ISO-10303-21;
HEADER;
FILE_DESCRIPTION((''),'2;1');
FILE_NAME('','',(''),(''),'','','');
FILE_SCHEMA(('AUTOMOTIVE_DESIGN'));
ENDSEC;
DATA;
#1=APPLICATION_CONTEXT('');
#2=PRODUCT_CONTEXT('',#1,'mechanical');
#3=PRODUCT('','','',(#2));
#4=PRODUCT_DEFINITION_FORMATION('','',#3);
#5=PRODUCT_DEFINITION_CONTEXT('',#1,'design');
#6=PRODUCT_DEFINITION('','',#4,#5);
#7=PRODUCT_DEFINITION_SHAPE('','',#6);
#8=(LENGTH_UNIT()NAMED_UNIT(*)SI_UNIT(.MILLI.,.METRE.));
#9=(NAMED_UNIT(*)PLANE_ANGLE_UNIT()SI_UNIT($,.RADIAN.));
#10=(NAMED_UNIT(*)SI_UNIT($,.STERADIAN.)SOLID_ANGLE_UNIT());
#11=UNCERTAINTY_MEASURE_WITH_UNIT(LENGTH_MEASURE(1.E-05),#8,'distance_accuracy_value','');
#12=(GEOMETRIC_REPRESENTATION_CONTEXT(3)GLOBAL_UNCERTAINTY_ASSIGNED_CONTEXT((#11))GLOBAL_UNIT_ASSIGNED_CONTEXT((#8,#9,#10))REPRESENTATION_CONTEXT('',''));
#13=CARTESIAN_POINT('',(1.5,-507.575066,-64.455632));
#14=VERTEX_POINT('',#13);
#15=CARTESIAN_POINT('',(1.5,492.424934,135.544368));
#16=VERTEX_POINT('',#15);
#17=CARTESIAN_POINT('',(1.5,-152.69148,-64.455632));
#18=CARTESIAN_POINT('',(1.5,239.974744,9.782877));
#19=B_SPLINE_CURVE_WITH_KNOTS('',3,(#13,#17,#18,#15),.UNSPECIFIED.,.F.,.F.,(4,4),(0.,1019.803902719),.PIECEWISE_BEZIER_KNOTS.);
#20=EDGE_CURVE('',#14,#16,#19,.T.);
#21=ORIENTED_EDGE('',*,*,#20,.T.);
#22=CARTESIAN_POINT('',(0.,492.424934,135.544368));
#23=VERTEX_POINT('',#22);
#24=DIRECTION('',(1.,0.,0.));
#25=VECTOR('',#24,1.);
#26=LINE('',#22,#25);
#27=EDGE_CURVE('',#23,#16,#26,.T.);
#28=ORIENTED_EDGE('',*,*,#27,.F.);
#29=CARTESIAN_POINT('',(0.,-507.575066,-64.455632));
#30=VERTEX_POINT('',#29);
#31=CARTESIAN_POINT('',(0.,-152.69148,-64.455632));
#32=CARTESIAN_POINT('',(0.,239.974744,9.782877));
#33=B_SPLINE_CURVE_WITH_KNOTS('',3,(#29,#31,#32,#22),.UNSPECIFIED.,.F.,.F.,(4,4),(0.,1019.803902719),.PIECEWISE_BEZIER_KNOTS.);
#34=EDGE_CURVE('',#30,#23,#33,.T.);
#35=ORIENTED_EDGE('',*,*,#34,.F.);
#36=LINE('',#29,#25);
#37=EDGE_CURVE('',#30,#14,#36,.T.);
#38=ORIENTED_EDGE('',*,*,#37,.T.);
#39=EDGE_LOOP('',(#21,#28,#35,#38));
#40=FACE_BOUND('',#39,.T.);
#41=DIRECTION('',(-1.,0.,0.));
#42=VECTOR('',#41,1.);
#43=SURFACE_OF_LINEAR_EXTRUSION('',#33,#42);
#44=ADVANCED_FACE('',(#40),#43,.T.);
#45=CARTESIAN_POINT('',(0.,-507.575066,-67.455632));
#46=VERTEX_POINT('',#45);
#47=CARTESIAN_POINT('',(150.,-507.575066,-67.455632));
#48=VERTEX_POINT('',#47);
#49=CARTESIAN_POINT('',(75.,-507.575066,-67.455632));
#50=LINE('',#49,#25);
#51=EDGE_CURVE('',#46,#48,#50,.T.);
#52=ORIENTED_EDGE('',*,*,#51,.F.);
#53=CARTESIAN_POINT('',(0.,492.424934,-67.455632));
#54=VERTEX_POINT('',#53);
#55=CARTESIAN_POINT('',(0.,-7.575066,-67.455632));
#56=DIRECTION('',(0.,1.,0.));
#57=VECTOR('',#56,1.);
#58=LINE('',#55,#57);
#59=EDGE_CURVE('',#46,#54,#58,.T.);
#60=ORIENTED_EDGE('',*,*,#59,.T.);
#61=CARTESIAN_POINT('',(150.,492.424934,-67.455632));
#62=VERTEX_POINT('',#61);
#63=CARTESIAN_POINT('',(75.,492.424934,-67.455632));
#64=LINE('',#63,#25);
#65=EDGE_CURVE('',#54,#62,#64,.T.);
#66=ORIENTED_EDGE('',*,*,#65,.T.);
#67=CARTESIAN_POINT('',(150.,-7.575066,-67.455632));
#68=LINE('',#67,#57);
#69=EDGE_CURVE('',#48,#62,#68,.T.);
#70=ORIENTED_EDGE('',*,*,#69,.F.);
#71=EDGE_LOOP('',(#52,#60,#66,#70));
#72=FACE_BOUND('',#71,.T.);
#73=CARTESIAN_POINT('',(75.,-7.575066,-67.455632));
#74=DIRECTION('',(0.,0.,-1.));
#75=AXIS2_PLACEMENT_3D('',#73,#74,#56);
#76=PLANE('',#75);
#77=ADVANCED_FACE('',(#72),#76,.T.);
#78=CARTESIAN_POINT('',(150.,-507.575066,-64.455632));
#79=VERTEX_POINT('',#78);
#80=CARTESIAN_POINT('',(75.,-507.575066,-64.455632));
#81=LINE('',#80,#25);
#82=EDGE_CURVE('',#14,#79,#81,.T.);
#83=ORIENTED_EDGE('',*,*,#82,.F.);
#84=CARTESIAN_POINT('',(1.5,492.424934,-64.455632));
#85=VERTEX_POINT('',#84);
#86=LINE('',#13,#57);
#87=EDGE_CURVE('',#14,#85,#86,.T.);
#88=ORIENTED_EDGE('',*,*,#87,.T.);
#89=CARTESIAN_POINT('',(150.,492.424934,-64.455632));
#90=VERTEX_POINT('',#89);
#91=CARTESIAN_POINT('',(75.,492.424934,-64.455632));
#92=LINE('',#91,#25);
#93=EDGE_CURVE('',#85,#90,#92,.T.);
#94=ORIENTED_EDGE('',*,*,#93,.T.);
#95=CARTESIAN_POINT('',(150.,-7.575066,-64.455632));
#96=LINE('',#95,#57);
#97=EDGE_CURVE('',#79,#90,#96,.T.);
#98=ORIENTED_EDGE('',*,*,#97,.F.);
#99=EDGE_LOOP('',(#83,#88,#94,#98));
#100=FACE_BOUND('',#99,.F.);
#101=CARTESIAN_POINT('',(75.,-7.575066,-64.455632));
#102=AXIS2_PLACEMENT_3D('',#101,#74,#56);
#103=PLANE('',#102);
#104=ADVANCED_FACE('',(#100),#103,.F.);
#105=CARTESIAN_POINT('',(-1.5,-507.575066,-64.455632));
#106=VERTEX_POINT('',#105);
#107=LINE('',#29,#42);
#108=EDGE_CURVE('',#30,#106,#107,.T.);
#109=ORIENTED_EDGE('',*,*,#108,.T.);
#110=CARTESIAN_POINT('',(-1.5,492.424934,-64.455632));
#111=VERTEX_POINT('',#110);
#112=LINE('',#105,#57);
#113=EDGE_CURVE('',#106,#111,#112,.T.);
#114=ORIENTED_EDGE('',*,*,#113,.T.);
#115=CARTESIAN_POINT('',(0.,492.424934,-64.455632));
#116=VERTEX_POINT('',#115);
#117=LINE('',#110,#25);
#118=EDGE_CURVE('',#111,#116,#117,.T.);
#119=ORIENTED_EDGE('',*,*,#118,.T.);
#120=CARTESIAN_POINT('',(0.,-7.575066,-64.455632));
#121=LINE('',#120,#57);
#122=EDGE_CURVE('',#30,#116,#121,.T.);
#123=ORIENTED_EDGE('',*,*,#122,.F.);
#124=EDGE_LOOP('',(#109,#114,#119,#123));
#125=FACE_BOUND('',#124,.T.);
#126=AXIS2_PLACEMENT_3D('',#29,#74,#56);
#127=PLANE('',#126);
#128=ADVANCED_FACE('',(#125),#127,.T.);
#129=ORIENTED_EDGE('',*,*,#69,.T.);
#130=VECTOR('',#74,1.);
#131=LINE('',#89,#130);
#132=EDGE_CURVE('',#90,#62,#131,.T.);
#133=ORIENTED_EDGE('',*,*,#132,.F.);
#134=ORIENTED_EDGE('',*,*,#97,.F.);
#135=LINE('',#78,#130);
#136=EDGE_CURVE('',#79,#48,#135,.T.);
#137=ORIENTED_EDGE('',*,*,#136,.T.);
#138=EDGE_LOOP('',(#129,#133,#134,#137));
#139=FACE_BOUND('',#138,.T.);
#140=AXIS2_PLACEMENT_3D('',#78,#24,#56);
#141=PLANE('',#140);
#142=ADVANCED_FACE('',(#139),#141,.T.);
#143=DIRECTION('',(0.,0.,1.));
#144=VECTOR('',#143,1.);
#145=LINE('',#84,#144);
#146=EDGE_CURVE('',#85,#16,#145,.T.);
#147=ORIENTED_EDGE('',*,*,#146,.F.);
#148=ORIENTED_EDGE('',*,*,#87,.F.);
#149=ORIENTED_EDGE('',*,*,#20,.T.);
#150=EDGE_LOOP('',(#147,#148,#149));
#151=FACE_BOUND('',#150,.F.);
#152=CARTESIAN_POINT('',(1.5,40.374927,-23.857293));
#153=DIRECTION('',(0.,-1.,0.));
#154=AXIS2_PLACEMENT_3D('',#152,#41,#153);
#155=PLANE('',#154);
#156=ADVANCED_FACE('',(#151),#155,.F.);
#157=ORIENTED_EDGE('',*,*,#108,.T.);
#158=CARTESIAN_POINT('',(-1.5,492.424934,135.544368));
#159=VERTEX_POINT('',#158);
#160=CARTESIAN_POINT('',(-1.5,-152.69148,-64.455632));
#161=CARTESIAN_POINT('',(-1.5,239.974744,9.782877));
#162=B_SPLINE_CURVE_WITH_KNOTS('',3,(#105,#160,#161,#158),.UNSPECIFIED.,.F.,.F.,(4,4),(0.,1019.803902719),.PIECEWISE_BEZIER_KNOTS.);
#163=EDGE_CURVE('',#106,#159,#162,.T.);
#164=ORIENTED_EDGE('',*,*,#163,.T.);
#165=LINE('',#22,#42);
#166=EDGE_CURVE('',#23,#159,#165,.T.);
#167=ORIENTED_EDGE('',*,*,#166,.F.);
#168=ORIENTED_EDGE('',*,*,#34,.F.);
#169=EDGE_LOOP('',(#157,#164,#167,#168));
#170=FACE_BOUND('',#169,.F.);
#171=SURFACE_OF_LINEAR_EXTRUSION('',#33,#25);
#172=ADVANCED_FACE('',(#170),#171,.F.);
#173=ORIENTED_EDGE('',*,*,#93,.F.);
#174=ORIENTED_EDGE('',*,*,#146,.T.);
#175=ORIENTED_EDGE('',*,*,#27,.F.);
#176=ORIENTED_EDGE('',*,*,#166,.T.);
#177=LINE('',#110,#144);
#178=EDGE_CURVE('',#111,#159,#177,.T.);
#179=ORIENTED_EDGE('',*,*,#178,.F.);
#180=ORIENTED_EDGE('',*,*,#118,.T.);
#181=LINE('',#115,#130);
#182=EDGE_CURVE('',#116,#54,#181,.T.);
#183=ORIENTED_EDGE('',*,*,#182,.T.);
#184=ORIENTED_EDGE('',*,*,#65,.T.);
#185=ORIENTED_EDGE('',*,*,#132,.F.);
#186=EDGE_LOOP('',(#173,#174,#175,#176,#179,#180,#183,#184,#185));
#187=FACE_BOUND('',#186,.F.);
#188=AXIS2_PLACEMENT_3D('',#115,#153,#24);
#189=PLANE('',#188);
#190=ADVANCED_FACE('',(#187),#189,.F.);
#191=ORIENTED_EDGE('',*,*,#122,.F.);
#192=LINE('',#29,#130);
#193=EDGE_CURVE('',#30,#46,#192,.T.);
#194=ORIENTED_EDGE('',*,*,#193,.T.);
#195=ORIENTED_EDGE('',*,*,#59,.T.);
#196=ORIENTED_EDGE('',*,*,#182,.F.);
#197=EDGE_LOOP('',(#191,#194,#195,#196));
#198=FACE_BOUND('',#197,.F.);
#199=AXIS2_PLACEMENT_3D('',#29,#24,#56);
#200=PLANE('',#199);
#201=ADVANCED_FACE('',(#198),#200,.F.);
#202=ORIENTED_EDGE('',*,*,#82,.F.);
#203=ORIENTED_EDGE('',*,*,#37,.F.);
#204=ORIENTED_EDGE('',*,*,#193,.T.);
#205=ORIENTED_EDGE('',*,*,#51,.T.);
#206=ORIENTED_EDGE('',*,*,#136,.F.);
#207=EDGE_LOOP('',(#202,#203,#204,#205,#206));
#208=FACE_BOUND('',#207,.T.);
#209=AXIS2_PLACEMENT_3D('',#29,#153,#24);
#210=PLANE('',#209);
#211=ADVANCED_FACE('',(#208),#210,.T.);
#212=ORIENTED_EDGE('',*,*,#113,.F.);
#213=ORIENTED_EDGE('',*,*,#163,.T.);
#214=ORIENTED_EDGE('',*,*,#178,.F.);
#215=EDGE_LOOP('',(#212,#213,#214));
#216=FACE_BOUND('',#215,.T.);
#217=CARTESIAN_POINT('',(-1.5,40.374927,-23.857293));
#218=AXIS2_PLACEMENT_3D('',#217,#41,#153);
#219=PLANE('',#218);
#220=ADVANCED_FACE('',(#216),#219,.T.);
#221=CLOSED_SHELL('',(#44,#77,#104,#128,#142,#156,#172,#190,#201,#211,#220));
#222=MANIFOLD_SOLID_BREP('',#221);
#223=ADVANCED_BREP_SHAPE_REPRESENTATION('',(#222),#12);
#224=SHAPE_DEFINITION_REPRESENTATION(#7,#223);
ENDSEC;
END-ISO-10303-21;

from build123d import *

# Parameters (mm, degrees)
F1_DEPTH = 1.5
F2_E1_W  = 1000
F2_E1_H  = 150
F3_DEPTH = 3


with BuildPart() as f1:
    # F0 (on Right) → F1 (new body, symmetric)
    with BuildSketch(Plane.YZ):
        with BuildLine():
            add(Edge.make_bspline(
                [(-507.5750658325, -64.4556317002), (-152.691480371, -64.4556317002), (239.9747440193, 9.7828772396), (492.4249341675, 135.5443682998)],
                knots=[0, 0, 0, 0, 1019.8039027186, 1019.8039027186, 1019.8039027186, 1019.8039027186], degree=3))
            Line((-507.5750658325, -64.4556317002), (492.4249341675, -64.4556317002))
            Line((492.4249341675, -64.4556317002), (492.4249341675, 135.5443682998))
        make_face()
    extrude(amount=F1_DEPTH, both=True)

    # F2_E1 (on explicit) → F3 (join)
    with BuildSketch(Plane(origin=(0, -507.5750658325, -64.4556317002), x_dir=(0, 1, 0), z_dir=(0, 0, -1))):
        with Locations((500, 75)):
            Rectangle(F2_E1_W, F2_E1_H)
    extrude(amount=F3_DEPTH)


solid = f1.part
